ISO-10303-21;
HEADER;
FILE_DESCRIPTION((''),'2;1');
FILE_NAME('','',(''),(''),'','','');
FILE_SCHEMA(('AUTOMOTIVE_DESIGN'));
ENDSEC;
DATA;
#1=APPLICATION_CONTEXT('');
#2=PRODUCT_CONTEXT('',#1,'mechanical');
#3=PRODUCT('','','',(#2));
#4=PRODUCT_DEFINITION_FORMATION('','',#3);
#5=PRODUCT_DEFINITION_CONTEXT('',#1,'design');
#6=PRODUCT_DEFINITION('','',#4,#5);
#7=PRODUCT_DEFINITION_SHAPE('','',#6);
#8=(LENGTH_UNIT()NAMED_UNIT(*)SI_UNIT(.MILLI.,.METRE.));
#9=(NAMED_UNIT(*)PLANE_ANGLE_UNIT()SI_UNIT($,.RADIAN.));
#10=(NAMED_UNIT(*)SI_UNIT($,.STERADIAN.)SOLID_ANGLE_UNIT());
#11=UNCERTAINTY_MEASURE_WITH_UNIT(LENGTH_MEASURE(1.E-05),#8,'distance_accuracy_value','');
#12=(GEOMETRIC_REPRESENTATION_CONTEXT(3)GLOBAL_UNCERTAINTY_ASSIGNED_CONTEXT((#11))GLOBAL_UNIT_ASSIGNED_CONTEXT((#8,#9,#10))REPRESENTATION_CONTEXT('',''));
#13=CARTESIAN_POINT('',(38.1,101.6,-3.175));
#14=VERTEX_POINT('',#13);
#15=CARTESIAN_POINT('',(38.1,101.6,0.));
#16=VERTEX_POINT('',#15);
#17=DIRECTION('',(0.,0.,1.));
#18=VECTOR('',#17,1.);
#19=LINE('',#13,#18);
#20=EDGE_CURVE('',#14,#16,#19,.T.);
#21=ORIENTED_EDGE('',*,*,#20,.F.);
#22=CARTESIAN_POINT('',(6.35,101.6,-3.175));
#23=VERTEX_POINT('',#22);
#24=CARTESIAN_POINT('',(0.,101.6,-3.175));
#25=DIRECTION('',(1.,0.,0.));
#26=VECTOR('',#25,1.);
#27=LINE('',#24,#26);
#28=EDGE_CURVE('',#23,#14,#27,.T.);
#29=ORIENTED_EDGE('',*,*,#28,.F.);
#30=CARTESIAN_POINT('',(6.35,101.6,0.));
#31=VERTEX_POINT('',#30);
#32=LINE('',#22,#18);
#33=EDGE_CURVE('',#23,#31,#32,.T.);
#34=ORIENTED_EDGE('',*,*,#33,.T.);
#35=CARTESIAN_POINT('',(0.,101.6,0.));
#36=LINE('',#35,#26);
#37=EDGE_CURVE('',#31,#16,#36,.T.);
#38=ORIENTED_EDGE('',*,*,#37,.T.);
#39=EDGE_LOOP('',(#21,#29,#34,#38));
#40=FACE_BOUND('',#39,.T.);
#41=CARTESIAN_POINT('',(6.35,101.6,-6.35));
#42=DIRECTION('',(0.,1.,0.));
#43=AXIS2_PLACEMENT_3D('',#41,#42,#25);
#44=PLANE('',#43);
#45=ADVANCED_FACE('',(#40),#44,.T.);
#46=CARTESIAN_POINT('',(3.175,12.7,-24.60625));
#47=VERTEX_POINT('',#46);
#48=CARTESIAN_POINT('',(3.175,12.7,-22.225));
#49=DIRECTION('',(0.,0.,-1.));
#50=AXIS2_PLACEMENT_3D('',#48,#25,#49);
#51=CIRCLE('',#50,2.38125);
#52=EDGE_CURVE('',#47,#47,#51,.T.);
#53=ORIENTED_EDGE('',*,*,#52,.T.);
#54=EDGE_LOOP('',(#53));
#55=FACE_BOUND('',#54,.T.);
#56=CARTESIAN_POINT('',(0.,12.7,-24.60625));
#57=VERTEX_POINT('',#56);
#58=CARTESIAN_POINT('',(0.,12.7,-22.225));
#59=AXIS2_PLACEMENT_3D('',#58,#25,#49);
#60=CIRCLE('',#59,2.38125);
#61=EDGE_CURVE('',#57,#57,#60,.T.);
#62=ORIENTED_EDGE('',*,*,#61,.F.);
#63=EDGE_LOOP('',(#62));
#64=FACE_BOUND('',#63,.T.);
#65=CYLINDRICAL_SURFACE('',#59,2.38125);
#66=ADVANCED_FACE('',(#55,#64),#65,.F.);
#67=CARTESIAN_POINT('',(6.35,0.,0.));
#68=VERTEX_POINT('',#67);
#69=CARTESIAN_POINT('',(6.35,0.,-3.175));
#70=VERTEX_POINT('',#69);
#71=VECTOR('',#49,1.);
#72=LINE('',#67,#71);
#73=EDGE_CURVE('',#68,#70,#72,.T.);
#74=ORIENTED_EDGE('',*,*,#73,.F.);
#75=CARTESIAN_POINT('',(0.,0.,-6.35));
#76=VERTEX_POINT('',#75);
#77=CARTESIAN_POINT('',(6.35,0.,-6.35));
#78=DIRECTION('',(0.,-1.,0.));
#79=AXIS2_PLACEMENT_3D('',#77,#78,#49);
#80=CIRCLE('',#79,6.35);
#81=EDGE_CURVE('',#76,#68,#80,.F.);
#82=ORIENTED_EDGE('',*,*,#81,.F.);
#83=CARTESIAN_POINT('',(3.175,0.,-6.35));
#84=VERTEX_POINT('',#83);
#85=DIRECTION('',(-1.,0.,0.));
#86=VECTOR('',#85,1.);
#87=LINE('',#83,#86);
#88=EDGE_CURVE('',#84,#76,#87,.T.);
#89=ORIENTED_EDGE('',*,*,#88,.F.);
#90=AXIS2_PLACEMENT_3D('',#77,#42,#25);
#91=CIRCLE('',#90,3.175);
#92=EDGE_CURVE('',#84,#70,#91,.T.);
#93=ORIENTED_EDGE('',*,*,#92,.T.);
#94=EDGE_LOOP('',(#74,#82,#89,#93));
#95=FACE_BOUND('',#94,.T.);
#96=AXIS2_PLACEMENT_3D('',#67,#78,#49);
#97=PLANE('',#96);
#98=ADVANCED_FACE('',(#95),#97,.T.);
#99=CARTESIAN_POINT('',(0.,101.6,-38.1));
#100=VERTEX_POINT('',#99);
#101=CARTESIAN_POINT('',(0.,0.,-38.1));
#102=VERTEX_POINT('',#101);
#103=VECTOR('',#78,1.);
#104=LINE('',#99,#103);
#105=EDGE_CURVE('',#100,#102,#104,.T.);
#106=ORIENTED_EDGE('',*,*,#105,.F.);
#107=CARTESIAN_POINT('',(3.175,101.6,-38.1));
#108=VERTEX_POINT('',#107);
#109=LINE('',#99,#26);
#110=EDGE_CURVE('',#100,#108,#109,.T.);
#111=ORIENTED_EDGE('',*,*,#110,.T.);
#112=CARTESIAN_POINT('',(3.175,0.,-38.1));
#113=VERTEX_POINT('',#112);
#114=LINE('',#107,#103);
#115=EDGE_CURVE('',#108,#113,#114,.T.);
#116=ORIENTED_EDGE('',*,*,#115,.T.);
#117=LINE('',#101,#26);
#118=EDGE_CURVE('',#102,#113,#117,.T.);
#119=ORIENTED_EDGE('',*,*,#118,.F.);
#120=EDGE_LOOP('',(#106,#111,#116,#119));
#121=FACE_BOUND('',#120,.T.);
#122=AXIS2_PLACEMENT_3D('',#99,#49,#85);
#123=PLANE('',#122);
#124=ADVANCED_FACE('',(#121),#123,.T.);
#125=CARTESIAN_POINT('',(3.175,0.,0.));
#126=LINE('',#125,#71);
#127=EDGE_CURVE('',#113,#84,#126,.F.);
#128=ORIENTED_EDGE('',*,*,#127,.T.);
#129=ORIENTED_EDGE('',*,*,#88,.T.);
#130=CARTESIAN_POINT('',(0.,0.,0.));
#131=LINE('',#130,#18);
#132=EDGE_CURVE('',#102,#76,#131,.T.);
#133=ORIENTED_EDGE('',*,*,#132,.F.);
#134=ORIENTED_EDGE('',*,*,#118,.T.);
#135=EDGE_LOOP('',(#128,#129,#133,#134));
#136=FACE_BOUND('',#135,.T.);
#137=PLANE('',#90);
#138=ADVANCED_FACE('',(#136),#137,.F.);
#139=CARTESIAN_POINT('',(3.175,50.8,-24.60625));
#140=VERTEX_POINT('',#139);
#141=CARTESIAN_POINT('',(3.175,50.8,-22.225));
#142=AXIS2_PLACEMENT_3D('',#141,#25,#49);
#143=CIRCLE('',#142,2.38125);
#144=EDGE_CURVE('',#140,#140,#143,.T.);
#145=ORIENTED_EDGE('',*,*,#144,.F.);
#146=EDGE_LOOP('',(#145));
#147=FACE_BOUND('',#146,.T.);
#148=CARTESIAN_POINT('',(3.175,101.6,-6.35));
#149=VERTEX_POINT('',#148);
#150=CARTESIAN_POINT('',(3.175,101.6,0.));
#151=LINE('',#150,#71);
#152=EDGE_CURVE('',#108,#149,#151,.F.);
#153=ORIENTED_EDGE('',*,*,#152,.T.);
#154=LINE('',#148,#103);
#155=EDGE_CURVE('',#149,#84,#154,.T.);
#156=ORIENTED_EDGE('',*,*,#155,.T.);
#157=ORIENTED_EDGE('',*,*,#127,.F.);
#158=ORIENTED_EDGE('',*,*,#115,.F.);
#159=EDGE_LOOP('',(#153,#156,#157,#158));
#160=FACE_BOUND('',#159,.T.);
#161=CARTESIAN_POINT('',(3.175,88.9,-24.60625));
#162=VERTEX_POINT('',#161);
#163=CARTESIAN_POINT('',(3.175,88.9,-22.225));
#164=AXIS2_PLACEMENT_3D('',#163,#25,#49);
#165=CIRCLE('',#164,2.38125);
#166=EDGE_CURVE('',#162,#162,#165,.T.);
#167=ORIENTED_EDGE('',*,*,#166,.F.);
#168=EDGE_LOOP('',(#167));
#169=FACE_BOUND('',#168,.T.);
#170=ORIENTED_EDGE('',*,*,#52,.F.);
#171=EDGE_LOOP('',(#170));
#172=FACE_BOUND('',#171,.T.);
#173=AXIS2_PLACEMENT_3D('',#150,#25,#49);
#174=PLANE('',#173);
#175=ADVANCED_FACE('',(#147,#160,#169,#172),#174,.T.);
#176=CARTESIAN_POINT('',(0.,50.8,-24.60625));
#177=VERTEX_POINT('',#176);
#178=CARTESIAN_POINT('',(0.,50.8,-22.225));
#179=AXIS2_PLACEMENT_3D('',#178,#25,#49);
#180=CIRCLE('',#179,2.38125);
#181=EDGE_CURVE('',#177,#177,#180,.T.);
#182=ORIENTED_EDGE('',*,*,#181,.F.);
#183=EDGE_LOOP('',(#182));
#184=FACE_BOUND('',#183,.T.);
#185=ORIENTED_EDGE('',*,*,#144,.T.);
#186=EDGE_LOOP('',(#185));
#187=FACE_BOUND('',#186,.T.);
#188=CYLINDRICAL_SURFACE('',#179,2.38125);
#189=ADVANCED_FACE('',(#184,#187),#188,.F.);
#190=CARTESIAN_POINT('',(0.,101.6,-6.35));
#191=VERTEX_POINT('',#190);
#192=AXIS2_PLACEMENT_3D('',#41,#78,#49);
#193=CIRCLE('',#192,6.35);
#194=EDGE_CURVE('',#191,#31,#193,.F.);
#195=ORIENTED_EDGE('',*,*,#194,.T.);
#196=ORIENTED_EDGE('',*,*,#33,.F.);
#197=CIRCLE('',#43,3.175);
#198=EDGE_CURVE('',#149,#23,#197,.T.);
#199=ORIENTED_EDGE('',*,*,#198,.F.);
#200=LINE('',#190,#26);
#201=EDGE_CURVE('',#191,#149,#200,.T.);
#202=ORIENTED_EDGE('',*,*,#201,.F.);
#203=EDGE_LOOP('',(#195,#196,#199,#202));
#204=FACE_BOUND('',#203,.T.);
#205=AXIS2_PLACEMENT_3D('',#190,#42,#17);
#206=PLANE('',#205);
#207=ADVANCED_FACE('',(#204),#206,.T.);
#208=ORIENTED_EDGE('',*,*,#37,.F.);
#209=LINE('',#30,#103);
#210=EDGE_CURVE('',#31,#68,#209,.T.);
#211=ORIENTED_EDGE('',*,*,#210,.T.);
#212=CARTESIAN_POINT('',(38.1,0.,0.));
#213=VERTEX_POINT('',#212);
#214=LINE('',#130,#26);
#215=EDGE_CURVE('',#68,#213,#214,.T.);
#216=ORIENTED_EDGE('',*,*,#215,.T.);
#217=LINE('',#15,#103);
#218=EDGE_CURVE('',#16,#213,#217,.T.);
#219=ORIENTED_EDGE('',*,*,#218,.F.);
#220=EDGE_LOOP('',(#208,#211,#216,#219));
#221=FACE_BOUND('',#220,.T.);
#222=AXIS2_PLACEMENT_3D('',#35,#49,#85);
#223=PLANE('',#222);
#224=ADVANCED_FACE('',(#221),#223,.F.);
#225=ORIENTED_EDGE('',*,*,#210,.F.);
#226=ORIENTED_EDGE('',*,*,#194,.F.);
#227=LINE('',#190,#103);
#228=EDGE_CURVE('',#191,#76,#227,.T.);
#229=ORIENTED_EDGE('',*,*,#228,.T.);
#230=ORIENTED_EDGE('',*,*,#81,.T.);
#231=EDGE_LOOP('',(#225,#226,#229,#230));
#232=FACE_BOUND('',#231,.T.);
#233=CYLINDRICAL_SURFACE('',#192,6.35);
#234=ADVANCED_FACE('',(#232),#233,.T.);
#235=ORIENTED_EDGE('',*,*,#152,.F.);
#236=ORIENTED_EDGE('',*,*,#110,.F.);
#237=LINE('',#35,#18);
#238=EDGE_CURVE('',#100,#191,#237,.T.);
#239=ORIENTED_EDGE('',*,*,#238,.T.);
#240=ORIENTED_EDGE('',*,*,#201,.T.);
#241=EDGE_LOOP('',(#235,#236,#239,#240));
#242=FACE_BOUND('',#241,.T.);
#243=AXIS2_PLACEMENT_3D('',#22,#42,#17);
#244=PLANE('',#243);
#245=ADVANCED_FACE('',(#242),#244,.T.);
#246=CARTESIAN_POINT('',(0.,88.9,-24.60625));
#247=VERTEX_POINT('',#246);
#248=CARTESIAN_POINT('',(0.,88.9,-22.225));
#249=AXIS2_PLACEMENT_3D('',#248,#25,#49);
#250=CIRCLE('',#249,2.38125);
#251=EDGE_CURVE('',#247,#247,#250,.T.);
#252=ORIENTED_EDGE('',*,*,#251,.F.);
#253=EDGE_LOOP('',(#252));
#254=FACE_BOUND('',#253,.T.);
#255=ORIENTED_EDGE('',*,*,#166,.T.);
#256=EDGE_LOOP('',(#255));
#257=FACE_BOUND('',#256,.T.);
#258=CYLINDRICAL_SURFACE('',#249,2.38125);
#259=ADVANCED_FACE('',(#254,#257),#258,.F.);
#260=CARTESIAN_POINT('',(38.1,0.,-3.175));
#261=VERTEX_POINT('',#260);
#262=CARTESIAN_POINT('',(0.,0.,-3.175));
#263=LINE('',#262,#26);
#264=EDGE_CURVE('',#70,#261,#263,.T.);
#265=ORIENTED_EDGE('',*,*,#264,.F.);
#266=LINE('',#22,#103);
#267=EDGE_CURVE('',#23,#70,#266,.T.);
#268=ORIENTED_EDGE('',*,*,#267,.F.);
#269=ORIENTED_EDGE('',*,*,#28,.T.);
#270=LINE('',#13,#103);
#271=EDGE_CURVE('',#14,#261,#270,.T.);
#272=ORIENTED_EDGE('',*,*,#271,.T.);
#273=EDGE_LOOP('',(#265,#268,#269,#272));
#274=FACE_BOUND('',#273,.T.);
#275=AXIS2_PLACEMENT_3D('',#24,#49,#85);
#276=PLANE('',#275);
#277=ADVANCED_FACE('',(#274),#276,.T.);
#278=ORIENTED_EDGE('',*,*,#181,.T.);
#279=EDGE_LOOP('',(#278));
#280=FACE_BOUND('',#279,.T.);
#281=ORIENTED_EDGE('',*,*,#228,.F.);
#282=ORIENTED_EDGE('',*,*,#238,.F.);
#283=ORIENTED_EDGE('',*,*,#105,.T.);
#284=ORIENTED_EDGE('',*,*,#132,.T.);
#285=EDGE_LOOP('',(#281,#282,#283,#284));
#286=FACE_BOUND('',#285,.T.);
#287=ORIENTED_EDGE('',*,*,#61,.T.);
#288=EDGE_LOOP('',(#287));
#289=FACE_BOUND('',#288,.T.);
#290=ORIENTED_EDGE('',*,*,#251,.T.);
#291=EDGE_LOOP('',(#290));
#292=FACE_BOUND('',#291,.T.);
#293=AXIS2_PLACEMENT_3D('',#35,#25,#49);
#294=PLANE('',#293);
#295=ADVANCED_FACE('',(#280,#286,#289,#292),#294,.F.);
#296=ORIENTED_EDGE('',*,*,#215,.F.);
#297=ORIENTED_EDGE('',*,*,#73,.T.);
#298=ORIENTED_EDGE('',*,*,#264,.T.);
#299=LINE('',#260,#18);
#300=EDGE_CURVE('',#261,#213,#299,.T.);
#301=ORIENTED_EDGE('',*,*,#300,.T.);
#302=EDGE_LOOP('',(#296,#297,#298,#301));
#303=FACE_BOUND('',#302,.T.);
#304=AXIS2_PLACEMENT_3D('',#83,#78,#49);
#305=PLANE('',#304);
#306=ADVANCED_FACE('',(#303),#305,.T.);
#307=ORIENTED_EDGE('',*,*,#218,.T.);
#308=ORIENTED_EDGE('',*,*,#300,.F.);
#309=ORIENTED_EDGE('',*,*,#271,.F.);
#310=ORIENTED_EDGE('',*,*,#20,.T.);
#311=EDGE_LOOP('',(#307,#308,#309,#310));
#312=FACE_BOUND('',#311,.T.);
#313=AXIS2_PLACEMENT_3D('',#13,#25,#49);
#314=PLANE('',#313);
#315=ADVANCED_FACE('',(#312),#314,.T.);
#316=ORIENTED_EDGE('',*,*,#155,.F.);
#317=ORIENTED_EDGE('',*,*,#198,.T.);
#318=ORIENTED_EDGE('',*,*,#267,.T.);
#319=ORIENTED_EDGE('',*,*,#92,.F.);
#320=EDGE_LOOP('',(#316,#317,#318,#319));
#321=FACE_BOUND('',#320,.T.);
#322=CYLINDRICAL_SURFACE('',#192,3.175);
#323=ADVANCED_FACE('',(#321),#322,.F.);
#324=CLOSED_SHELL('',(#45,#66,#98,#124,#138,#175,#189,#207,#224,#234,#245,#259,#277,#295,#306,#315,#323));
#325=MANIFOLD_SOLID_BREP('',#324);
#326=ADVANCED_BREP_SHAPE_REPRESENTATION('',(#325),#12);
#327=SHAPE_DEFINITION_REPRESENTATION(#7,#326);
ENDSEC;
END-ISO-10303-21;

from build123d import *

# Parameters (mm, degrees)
BASE_FLANGE2_DEPTH = 101.6
SKETCH11_R         = 2.38125
CUT_EXTRUDE1_DEPTH = 114.990901501


# Sheet-metal steps are written as plain solids
with BuildPart() as part:
    # Sketch6 → Base-Flange2 (new body)
    with BuildSketch(Plane(origin=(0, 0, 0), x_dir=(1, 0, 0), z_dir=(0, 1, 0))):
        with BuildLine():
            Line((38.1, 0), (6.35, 0))
            ThreePointArc((6.35, 0), (1.859871939, 1.859871939), (0, 6.35))
            Line((0, 6.35), (0, 38.1))
            Line((0, 38.1), (3.175, 38.1))
            Line((3.175, 38.1), (3.175, 6.35))
            ThreePointArc((3.175, 6.35), (4.10493597, 4.10493597), (6.35, 3.175))
            Line((6.35, 3.175), (38.1, 3.175))
            Line((38.1, 3.175), (38.1, 0))
        make_face()
    extrude(amount=BASE_FLANGE2_DEPTH)

    # Sketch11 → Cut-Extrude1 (cut, through all)
    with BuildSketch(Plane(origin=(3.175, 0, 0), x_dir=(0, 0, -1), z_dir=(1, 0, 0))):
        with Locations((22.225, 88.9)):
            Circle(SKETCH11_R)
        with Locations((22.225, 12.7)):
            Circle(SKETCH11_R)
        with Locations((22.225, 50.8)):
            Circle(SKETCH11_R)
    extrude(amount=-CUT_EXTRUDE1_DEPTH, mode=Mode.SUBTRACT)


solid = part.part
